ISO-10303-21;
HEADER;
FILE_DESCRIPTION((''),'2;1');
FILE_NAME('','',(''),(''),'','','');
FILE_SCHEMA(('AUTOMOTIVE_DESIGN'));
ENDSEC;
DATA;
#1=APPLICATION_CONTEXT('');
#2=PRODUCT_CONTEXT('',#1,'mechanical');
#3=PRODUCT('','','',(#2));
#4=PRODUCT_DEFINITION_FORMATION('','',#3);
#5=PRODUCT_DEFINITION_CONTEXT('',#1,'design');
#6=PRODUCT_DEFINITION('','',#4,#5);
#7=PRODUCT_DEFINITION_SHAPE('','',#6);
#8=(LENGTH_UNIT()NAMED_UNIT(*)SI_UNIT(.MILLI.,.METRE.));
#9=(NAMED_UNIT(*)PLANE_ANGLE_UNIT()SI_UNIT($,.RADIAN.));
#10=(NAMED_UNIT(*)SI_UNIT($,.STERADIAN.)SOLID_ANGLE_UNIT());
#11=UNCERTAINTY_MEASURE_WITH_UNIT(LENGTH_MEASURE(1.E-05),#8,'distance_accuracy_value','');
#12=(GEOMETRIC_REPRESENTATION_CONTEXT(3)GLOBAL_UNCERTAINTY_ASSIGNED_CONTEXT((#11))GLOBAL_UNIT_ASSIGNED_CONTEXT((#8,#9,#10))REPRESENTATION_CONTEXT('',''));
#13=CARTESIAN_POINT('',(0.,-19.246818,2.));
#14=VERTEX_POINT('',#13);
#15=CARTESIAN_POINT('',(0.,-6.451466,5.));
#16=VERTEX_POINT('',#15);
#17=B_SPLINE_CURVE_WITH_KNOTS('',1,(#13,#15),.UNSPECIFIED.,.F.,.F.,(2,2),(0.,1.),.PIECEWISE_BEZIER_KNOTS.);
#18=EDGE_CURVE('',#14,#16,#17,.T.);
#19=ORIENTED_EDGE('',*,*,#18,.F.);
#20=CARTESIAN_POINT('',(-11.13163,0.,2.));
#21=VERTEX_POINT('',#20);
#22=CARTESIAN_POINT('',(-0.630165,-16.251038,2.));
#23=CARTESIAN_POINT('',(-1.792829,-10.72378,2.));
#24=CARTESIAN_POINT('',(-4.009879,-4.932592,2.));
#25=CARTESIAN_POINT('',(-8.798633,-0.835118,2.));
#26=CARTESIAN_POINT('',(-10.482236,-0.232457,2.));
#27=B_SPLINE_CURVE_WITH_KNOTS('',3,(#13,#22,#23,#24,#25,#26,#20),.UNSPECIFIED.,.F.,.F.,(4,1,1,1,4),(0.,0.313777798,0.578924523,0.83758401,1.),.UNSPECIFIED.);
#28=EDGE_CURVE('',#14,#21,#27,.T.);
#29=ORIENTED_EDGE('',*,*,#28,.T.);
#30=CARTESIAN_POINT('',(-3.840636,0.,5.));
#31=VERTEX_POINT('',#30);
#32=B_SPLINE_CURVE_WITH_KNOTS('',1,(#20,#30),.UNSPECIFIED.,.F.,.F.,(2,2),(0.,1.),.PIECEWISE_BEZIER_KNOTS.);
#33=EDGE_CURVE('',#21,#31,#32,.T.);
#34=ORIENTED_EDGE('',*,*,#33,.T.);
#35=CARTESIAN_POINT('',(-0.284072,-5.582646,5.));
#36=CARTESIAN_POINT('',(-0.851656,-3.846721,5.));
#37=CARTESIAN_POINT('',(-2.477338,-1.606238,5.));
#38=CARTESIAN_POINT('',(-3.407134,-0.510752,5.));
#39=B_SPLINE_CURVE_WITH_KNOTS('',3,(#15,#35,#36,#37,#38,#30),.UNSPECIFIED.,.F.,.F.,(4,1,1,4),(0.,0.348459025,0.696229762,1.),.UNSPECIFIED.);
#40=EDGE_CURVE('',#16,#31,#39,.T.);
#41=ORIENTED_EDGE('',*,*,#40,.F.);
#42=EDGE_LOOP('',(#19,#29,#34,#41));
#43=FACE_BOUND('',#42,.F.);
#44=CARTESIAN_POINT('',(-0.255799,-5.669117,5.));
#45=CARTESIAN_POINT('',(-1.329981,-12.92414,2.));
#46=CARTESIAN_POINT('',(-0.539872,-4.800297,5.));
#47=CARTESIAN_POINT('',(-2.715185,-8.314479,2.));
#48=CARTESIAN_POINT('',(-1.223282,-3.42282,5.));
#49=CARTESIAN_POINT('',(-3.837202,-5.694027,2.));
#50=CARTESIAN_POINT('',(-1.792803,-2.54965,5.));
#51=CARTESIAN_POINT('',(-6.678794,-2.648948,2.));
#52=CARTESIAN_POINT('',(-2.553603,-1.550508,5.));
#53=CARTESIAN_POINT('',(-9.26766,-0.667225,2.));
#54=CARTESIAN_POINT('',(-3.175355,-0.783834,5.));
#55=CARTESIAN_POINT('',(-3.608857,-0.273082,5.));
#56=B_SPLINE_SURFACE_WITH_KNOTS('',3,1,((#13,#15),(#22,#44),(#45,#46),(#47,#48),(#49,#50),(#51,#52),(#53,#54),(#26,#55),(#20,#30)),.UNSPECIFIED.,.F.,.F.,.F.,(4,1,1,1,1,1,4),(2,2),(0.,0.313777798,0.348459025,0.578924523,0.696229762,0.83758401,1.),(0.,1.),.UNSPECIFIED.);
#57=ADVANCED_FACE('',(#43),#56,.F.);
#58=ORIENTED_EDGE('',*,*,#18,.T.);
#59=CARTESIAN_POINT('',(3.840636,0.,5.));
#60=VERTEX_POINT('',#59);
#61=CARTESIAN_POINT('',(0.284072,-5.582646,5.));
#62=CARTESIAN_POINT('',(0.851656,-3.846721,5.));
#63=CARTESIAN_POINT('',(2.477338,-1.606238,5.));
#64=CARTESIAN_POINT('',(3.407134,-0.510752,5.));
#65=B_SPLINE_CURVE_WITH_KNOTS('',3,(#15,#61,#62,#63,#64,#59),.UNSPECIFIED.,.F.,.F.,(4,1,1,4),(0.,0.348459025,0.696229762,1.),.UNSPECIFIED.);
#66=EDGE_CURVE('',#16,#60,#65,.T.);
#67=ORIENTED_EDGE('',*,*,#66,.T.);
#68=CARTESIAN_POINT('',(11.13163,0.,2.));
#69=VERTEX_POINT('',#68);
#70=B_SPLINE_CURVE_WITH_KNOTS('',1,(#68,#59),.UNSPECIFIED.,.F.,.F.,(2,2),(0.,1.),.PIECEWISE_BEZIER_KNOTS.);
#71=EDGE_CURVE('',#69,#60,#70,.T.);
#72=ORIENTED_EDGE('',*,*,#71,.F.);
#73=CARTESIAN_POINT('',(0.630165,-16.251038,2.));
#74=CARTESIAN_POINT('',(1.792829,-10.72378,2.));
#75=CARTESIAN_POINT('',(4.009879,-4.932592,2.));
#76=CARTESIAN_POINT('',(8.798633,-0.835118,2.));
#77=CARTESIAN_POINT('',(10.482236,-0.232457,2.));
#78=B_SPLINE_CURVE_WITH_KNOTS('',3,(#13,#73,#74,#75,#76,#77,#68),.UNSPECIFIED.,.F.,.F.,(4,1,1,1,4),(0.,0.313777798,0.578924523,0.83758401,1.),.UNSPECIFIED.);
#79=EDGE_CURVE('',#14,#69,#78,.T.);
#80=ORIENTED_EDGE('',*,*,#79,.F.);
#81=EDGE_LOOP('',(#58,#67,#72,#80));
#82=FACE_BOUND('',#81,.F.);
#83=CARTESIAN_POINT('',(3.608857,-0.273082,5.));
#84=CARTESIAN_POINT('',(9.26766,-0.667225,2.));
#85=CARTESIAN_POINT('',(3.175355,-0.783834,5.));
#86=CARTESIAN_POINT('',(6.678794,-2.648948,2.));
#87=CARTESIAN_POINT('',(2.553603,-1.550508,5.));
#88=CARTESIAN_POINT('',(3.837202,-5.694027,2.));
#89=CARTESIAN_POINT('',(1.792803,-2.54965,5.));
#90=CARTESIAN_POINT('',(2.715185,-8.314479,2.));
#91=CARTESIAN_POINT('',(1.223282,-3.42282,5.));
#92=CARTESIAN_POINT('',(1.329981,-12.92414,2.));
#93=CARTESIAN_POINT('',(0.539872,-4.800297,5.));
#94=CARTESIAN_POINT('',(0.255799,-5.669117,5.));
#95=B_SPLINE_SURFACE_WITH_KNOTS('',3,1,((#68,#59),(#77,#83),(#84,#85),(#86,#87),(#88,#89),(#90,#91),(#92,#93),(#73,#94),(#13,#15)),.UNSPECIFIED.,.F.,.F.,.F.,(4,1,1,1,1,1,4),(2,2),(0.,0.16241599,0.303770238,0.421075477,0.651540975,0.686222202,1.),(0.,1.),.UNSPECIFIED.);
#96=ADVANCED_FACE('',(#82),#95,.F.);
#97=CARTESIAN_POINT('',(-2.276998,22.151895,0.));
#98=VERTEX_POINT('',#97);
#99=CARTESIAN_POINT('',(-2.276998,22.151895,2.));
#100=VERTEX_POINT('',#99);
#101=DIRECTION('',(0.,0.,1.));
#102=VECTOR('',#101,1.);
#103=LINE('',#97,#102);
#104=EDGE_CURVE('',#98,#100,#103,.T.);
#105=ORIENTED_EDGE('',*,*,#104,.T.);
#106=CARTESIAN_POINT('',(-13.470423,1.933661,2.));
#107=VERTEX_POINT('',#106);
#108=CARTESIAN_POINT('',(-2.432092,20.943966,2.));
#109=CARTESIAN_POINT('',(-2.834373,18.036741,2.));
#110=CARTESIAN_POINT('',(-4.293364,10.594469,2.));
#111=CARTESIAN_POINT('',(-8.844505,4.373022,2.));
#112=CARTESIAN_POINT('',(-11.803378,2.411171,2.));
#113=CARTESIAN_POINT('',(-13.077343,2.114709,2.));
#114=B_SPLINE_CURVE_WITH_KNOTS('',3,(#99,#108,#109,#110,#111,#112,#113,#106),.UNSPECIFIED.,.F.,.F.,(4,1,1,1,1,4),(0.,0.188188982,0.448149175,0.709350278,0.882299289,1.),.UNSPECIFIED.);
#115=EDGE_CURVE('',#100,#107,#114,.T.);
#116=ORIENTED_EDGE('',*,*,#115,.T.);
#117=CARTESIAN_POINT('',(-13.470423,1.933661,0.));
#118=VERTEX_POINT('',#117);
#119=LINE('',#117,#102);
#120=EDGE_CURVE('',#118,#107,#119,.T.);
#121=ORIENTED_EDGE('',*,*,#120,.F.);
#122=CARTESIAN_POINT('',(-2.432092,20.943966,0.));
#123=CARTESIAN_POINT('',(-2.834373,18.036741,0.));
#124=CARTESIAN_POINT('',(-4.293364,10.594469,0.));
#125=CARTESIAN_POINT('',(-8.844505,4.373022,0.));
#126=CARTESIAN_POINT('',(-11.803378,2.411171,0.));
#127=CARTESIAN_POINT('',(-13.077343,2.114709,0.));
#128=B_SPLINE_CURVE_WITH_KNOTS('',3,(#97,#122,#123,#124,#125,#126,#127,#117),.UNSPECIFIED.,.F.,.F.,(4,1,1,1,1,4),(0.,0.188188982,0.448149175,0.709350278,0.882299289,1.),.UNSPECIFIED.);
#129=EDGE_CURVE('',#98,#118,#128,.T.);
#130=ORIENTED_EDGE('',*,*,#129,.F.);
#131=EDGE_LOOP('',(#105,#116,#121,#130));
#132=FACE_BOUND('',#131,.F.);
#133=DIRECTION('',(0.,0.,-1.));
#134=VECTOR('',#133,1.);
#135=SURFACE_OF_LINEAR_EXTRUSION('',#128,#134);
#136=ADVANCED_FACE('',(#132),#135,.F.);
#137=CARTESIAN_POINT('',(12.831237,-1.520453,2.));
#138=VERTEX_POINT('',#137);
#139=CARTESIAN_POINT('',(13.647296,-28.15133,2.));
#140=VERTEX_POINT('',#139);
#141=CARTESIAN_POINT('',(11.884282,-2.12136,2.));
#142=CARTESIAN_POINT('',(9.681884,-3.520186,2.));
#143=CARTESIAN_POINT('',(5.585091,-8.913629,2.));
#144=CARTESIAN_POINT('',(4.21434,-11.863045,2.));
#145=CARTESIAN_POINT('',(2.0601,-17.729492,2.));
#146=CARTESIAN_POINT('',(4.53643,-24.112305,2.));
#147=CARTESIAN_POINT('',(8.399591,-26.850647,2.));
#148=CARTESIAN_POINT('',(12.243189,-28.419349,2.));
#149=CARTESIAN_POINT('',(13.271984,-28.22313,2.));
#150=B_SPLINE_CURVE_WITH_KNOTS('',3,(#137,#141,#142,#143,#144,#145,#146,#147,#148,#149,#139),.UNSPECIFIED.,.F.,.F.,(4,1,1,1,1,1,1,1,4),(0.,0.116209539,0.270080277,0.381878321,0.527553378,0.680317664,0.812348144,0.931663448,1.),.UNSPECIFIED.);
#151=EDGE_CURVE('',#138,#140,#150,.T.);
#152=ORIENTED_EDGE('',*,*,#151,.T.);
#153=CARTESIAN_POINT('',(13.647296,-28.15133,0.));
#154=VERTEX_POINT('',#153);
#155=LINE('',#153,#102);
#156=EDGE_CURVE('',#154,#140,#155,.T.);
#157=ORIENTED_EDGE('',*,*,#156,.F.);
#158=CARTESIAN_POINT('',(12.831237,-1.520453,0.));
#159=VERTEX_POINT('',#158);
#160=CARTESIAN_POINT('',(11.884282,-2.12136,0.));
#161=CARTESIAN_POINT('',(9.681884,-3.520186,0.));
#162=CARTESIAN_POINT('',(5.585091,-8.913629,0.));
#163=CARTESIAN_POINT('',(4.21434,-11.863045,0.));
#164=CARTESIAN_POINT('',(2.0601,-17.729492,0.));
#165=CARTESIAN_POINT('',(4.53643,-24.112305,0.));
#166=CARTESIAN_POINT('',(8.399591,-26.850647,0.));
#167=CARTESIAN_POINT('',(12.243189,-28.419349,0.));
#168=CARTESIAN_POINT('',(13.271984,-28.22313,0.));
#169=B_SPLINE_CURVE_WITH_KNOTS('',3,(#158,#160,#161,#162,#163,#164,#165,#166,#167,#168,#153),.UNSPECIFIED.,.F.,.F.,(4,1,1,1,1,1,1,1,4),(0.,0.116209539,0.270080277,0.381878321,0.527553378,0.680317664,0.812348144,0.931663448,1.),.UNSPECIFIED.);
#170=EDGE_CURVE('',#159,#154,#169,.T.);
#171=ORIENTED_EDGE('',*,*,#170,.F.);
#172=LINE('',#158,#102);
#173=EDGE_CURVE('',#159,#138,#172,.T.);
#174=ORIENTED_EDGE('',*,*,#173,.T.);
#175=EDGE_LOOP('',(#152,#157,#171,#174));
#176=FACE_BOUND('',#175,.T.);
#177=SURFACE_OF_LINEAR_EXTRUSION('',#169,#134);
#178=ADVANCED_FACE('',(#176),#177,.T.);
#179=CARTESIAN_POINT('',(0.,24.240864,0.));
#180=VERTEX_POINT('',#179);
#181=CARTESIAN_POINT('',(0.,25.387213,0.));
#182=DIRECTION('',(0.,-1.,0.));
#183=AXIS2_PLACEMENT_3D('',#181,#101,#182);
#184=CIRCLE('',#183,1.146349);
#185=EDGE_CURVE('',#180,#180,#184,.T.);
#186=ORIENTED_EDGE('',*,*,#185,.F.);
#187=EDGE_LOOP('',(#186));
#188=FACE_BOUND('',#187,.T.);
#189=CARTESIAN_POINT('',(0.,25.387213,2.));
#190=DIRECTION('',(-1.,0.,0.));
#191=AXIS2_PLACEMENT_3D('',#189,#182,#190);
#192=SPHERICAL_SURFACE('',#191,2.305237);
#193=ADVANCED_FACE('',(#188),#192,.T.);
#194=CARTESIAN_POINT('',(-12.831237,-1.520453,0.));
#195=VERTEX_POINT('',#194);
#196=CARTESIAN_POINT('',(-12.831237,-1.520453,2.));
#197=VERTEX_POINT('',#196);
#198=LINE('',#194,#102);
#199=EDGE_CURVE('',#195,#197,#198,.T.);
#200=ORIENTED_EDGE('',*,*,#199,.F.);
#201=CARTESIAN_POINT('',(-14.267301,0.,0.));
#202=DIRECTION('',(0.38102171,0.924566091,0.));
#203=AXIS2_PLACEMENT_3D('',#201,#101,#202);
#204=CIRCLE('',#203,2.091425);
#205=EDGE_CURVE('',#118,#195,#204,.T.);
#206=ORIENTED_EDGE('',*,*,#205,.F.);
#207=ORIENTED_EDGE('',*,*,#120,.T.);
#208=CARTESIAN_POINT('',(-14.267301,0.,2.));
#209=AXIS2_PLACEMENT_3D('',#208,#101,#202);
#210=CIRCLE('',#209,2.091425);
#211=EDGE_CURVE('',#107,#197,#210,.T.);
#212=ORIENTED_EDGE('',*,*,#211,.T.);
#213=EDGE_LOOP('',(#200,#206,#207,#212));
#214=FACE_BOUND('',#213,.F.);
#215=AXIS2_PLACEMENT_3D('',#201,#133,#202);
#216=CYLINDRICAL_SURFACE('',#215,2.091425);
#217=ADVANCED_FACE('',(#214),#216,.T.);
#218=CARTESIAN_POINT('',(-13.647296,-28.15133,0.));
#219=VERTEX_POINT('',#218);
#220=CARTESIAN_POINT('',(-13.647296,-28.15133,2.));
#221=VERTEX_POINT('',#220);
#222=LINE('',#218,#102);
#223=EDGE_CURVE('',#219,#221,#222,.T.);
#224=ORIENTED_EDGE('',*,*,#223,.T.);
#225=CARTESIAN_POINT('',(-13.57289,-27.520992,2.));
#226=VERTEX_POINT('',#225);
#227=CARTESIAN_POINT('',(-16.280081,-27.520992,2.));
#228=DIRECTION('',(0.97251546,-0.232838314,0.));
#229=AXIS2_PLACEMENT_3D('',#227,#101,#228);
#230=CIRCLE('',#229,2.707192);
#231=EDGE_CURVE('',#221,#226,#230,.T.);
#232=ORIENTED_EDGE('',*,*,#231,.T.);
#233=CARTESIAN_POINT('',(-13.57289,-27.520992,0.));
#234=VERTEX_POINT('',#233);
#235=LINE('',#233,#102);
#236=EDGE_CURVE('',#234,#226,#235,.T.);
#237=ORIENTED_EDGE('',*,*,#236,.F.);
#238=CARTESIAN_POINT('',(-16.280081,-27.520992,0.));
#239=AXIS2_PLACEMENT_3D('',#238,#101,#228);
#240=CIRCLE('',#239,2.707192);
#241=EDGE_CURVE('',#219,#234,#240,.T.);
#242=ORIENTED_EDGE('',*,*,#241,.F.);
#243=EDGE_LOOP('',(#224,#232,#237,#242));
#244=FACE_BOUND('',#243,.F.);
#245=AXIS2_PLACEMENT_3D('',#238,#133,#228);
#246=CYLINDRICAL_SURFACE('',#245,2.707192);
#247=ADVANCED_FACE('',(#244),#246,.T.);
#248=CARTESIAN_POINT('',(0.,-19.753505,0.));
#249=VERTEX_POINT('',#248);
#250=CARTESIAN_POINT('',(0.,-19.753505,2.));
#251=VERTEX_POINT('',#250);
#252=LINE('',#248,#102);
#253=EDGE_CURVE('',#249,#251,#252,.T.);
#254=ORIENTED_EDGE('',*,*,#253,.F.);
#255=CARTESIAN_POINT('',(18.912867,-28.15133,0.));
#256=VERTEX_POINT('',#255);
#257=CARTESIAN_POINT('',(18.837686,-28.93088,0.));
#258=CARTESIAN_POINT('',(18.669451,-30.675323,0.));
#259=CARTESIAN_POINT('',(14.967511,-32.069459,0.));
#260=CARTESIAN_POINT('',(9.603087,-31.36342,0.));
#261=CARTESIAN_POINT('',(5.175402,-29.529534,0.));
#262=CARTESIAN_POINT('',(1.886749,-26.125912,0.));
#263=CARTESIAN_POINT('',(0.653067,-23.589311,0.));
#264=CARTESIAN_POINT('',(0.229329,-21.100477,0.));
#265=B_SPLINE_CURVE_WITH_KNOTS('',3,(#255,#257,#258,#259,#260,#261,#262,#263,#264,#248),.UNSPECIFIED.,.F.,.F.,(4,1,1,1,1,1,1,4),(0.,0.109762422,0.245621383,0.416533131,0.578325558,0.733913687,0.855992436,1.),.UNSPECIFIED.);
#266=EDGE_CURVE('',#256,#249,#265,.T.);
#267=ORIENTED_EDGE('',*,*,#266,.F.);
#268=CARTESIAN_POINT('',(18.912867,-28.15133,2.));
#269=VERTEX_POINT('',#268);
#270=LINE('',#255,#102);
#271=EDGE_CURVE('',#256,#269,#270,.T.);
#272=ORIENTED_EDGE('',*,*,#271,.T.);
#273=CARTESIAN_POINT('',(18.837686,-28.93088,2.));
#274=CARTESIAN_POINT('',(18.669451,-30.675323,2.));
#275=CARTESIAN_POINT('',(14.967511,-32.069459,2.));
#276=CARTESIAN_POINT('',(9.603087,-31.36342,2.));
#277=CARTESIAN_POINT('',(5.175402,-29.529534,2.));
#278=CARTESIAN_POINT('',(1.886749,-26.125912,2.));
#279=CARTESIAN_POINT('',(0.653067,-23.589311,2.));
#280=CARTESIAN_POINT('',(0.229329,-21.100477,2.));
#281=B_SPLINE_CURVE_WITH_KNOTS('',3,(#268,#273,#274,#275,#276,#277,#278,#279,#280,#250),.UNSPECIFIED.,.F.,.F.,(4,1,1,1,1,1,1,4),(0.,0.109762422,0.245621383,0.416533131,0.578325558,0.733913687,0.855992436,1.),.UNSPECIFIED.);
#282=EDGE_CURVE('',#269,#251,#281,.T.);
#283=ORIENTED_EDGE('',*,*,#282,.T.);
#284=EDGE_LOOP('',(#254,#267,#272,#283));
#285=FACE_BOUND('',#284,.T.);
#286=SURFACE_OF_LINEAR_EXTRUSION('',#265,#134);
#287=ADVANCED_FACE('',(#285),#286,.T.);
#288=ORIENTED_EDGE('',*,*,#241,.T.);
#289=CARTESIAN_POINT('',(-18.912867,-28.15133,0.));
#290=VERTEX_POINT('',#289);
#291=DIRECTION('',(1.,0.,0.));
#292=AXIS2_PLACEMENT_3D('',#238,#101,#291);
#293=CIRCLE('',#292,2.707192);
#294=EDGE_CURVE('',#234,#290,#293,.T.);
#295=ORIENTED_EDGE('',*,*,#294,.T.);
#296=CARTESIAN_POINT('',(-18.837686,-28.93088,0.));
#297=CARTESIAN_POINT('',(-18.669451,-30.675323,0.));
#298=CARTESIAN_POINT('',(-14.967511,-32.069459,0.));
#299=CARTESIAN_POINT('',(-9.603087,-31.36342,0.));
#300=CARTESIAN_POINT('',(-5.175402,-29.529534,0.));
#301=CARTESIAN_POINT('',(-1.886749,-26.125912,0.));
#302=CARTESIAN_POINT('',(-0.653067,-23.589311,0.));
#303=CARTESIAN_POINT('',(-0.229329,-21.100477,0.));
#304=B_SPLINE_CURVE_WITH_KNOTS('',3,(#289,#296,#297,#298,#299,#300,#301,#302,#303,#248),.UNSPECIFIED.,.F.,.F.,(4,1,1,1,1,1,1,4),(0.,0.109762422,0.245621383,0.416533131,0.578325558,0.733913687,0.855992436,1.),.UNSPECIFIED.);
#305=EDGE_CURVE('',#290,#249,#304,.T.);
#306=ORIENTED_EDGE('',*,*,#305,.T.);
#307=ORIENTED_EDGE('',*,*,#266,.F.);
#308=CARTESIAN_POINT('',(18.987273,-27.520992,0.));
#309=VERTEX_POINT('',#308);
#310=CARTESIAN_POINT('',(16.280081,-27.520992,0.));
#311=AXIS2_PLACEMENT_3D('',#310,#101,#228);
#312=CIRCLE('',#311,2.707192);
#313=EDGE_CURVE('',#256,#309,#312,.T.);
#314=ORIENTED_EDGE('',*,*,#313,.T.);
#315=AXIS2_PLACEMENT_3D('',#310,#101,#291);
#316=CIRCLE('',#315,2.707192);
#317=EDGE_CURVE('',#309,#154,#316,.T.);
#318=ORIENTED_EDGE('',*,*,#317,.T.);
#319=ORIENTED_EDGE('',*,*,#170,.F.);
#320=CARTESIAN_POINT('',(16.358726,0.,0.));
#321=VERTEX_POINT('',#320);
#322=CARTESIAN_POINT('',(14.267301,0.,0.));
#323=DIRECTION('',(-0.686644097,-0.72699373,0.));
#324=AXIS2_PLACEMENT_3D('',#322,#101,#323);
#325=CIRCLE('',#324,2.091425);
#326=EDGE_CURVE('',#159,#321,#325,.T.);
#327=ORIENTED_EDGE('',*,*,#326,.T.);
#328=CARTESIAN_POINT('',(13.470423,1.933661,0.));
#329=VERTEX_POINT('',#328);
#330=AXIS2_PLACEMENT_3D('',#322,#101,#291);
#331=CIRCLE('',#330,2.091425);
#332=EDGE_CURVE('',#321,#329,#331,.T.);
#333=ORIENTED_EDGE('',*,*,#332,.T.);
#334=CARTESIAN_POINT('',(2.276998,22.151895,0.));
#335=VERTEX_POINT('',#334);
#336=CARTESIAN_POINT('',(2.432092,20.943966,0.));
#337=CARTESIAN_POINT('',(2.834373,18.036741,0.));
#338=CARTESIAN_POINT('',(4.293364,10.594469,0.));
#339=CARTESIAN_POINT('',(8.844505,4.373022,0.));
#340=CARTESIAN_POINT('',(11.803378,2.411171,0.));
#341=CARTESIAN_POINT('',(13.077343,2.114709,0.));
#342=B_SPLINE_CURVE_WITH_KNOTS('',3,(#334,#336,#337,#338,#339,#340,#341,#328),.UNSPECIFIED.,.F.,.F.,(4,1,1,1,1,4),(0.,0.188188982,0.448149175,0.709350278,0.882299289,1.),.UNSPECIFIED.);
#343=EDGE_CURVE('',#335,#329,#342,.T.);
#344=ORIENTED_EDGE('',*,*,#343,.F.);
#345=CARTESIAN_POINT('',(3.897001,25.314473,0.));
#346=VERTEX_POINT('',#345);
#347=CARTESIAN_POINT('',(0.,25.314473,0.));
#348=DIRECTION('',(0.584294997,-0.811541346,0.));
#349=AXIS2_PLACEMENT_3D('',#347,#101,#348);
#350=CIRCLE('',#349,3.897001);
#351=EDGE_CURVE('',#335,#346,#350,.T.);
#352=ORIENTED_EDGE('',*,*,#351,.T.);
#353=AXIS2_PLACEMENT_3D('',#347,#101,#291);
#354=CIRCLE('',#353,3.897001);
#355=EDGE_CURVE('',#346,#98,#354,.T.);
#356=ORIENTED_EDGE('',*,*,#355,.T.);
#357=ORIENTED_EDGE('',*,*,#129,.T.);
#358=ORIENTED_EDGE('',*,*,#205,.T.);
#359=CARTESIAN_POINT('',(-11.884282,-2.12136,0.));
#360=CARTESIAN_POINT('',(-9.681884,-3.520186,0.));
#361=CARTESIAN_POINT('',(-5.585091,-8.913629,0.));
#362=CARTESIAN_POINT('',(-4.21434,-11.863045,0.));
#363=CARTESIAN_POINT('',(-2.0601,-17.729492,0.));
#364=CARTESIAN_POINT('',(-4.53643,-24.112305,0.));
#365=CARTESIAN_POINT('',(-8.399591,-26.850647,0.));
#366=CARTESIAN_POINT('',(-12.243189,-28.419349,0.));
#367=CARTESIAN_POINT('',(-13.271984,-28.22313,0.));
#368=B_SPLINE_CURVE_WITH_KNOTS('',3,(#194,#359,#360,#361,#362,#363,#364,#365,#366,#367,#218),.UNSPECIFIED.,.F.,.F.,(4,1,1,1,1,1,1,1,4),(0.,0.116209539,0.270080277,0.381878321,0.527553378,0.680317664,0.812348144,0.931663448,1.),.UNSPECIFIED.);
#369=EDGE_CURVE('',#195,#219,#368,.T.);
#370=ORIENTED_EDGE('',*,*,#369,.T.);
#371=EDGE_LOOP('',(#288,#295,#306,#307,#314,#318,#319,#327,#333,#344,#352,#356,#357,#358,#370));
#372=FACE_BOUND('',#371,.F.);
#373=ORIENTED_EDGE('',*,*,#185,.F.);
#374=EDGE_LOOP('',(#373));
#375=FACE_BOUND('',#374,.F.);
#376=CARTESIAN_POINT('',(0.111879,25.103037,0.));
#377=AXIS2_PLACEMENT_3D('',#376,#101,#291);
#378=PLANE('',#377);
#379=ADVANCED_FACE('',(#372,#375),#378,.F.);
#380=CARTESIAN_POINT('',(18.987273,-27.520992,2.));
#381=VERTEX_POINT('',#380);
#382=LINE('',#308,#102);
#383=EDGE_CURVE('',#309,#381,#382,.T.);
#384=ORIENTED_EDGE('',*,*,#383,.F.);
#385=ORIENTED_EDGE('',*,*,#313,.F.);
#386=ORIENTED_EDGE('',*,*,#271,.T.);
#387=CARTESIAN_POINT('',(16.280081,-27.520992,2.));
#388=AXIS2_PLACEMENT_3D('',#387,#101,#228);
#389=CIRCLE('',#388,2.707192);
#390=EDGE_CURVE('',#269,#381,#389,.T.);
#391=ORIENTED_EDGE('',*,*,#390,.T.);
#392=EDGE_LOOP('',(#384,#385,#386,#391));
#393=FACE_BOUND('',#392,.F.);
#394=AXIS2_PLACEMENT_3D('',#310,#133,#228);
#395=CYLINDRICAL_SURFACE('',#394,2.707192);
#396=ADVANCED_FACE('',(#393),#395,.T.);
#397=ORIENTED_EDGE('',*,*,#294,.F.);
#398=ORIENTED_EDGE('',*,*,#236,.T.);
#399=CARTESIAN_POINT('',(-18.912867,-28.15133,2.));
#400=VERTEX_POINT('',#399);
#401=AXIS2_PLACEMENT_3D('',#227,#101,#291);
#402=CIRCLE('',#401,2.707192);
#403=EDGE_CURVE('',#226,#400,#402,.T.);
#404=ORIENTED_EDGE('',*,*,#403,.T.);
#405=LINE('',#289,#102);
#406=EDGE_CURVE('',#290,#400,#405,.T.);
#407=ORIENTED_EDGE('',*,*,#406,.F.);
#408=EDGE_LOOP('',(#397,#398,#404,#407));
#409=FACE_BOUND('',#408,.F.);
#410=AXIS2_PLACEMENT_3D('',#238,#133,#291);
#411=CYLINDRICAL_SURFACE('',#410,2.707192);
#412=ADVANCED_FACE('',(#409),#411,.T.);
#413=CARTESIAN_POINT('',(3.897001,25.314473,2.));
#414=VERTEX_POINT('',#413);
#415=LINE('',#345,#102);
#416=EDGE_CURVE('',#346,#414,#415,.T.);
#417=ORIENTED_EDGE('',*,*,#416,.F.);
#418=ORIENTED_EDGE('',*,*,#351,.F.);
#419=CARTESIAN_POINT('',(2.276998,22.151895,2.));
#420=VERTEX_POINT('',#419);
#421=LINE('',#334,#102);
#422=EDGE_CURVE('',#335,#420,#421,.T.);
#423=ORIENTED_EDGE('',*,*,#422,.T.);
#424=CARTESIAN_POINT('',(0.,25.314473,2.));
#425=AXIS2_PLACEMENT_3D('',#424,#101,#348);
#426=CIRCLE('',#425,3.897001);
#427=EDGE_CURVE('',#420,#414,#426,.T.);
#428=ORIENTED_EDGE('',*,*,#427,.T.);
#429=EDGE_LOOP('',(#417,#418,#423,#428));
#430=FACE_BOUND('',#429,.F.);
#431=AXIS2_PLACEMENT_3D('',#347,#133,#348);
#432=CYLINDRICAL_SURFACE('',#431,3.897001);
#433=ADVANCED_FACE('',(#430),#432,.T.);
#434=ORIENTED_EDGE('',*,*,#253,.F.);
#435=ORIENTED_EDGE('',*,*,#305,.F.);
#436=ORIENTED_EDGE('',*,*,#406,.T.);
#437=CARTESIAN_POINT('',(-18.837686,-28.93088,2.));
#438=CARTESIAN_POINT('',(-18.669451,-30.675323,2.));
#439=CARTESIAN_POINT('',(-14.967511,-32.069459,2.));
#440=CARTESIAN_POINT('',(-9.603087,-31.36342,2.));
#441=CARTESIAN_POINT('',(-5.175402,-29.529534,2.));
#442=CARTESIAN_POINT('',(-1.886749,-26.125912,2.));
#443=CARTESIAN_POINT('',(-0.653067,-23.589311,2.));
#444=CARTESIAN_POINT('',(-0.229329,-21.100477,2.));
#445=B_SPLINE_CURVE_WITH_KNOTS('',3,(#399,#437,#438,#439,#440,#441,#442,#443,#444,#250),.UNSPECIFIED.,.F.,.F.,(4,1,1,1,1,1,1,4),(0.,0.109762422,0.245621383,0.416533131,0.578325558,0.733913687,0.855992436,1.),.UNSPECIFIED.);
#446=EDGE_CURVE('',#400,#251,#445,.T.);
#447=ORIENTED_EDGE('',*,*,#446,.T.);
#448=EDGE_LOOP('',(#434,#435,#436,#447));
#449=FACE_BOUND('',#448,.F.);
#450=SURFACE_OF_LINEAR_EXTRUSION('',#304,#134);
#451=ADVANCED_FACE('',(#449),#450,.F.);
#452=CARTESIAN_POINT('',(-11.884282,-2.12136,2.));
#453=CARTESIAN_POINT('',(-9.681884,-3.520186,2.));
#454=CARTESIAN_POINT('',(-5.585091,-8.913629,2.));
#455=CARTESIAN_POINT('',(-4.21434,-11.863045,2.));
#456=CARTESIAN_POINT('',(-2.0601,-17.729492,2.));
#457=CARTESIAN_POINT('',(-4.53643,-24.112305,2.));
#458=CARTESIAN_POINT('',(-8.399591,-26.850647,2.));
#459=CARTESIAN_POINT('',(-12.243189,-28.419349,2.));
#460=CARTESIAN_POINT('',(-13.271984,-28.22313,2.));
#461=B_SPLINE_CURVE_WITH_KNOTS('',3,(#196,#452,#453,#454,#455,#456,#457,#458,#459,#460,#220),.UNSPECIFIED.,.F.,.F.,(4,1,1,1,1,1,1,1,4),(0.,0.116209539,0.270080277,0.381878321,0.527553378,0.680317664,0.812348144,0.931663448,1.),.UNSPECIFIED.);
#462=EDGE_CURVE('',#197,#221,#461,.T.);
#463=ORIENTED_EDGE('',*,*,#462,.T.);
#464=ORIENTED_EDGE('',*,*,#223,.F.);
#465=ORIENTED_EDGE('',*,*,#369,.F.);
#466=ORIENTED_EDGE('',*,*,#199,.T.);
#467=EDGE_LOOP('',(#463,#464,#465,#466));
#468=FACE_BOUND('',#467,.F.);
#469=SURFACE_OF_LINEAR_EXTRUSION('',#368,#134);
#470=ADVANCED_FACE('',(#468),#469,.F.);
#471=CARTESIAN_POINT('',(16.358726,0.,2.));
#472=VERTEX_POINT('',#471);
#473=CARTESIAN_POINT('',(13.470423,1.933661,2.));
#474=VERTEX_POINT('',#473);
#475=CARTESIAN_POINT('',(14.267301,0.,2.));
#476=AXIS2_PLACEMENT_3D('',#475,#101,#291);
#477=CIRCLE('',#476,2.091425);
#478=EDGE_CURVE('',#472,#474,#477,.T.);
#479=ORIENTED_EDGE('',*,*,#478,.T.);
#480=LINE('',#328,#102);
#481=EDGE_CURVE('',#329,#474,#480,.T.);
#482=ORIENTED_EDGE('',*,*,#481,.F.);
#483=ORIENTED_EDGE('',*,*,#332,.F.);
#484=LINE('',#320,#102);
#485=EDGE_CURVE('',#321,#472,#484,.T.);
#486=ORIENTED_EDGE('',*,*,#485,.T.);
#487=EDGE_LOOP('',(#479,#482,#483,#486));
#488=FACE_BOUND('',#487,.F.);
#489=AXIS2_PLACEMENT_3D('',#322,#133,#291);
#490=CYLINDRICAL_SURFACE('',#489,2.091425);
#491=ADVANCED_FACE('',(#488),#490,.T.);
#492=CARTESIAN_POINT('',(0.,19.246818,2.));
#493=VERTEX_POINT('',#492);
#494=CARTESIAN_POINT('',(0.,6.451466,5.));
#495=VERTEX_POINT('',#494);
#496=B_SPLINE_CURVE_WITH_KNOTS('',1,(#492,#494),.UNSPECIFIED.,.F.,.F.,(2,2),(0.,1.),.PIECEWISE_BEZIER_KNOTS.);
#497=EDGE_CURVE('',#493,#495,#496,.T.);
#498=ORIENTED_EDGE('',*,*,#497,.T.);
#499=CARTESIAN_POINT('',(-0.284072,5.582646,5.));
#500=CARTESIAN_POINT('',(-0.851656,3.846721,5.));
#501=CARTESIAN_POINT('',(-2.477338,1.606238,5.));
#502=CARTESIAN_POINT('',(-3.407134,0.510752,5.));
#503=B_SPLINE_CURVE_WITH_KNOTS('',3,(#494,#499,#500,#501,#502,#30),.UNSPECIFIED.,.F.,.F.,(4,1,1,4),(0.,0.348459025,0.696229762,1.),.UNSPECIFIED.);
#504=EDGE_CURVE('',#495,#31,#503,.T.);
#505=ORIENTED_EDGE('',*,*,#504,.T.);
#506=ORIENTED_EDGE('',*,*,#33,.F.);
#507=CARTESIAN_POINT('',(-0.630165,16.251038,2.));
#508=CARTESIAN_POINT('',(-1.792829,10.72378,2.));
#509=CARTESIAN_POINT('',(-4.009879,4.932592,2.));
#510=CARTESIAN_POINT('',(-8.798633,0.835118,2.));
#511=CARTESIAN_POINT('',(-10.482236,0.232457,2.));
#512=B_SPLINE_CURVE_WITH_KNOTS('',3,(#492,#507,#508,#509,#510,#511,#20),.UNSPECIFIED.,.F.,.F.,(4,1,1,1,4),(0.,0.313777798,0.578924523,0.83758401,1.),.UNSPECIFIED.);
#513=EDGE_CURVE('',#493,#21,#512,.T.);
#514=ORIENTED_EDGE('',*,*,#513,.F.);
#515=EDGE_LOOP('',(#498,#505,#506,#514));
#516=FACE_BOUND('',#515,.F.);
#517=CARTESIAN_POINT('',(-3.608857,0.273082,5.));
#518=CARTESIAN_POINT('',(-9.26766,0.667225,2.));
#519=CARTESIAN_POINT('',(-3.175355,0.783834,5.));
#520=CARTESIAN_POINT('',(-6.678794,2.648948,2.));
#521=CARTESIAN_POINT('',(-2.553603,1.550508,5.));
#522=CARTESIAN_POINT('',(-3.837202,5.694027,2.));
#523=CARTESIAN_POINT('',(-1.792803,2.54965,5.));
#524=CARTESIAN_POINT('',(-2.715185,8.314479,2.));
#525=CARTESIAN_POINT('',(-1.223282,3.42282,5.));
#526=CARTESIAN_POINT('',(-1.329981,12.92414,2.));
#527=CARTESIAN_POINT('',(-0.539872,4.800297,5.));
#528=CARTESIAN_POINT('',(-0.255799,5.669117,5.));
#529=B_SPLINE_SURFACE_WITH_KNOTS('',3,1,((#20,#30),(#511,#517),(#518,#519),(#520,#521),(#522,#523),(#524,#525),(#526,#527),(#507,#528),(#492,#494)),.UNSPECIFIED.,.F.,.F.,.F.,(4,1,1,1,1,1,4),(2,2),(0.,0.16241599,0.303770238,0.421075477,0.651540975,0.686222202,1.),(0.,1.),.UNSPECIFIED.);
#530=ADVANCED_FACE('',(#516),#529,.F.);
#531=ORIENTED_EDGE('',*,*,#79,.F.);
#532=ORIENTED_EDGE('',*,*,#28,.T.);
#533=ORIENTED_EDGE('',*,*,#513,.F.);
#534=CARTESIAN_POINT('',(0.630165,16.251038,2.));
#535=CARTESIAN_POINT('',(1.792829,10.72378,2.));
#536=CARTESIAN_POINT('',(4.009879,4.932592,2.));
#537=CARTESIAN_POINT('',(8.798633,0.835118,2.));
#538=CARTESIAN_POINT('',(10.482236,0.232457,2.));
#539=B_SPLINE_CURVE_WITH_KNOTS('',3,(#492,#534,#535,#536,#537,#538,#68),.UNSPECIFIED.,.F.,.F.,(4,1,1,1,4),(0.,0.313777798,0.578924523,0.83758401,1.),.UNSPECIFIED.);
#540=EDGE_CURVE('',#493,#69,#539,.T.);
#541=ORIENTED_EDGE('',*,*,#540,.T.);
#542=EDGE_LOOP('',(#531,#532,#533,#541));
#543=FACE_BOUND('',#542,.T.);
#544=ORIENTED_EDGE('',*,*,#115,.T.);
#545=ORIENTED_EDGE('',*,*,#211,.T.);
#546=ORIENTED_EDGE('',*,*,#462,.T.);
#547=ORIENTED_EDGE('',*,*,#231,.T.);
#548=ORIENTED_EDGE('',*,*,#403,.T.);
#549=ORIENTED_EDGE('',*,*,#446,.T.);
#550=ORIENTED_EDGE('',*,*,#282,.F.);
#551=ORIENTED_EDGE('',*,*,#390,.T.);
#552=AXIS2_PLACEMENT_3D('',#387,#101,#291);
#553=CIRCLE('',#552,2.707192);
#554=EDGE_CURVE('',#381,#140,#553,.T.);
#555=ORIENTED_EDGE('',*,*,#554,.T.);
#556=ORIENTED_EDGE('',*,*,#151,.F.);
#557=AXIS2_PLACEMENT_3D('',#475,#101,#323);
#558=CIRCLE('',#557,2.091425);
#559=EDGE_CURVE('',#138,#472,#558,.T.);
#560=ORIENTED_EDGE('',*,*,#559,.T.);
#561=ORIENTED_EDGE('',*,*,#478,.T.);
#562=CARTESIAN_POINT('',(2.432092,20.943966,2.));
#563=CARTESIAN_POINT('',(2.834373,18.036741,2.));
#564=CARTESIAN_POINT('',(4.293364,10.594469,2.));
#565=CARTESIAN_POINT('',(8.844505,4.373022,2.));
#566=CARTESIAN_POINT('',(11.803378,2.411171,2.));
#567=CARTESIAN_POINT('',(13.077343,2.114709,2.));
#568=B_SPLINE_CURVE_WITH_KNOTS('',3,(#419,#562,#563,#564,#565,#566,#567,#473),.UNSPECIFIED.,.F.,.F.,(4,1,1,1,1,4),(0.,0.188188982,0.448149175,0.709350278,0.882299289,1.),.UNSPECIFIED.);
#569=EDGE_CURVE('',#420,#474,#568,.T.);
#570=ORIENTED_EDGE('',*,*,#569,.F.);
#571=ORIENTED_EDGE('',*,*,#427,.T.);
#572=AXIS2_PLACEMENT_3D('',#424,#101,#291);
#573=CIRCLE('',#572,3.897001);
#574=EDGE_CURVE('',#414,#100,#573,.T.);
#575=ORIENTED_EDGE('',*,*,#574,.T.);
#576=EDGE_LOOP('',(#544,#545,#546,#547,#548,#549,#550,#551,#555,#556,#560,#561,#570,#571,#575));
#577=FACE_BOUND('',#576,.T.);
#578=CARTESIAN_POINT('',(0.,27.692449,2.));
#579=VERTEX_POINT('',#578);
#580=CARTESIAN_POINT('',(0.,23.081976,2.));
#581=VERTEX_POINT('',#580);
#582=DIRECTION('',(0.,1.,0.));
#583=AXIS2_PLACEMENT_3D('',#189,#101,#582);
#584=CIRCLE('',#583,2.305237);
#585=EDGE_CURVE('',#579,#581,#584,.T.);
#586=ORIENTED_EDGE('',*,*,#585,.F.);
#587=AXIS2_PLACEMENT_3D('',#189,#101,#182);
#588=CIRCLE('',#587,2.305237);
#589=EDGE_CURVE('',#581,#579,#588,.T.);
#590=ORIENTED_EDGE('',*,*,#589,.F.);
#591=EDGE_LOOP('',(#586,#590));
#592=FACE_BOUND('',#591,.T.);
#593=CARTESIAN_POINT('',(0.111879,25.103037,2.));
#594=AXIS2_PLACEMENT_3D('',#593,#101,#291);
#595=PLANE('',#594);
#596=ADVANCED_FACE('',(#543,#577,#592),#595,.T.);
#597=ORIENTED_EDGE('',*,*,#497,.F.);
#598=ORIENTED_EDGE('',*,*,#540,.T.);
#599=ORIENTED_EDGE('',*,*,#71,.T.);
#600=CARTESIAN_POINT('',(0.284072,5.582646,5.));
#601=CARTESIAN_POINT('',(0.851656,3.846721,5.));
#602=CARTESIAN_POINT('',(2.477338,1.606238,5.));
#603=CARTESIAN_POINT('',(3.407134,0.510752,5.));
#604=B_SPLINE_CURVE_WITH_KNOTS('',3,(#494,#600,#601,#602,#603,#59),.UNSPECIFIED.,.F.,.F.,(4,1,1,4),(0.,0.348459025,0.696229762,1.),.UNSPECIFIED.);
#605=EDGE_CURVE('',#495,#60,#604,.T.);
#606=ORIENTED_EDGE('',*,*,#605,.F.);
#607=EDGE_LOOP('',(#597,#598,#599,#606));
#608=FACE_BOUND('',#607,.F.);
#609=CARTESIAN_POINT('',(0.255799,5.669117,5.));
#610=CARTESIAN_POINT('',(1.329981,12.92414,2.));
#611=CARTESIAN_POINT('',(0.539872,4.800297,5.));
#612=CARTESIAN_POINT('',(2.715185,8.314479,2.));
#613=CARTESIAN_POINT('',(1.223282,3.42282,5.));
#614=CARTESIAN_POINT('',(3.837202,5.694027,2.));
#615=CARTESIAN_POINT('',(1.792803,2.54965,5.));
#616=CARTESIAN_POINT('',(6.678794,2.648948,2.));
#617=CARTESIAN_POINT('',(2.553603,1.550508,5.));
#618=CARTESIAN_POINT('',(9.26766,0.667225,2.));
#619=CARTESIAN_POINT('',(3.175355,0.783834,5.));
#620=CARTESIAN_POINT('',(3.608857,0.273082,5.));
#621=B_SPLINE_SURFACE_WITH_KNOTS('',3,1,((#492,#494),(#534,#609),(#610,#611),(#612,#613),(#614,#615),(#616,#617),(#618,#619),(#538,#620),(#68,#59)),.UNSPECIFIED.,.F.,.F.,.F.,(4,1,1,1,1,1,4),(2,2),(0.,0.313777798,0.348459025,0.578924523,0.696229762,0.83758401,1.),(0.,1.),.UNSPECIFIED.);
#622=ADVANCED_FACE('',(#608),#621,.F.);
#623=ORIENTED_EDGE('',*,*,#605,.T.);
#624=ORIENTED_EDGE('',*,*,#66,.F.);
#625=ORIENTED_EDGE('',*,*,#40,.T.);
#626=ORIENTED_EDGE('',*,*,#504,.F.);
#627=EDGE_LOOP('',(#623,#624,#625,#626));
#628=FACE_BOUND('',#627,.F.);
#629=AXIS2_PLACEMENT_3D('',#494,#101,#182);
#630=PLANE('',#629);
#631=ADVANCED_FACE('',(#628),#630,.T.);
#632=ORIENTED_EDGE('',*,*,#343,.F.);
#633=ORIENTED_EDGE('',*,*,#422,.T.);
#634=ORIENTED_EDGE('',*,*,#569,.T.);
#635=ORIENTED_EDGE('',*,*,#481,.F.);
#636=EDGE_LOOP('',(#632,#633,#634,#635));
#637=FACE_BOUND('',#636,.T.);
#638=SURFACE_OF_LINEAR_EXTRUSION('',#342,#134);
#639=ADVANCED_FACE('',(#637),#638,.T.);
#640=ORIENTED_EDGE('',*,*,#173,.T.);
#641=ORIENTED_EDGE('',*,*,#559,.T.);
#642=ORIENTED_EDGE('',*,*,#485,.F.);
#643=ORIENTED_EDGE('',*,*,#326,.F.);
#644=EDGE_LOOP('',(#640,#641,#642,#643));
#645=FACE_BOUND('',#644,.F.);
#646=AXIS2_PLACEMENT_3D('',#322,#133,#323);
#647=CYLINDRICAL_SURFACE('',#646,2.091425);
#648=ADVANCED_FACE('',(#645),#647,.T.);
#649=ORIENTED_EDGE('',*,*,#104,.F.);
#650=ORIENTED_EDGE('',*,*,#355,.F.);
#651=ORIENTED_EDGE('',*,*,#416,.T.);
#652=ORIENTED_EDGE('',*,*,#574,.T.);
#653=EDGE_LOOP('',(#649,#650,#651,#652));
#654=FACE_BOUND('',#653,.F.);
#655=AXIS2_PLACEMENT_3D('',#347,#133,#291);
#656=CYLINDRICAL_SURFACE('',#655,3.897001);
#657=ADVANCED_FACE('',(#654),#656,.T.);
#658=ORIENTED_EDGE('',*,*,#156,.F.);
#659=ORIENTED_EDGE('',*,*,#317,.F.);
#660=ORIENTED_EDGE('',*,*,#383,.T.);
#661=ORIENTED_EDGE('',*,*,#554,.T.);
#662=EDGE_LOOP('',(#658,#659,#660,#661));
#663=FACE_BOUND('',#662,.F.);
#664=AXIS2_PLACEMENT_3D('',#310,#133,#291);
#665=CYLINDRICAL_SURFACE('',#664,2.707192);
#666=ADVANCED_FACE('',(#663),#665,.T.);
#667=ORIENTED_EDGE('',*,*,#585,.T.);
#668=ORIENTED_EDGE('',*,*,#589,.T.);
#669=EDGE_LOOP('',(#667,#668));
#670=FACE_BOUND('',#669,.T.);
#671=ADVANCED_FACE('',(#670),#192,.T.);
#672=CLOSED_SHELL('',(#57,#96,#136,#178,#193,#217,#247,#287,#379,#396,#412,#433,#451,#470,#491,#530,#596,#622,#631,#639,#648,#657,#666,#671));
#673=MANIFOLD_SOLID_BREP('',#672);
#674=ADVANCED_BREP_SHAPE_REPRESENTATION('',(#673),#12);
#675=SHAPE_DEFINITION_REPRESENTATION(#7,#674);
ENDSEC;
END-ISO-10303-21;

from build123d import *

# Parameters (mm, degrees)
F1_DEPTH = 2


with BuildPart() as f1:
    # F0 (on Top) → F1 (new body)
    with BuildSketch(Plane.XY):
        with BuildLine():
            ThreePointArc((2.276998472, 22.1518947859), (3.4684353098, 23.5377967667), (3.8970014846, 25.3144726157))
            ThreePointArc((3.8970014846, 25.3144726157), (-1.776675849, 28.7829079255), (-2.276998472, 22.1518947859))
            ThreePointArc((-2.276998472, 22.1518947859), (0, 21.4174711311), (2.276998472, 22.1518947859))
        make_face()
        with BuildLine():
            ThreePointArc((2.276998472, 22.1518947859), (0, 21.4174711311), (-2.276998472, 22.1518947859))
            add(Edge.make_bspline(
                [(-2.276998472, 22.1518947859), (-2.43209236, 20.9439660702), (-2.8343734971, 18.0367414787), (-4.2933644234, 10.5944689547), (-8.8445045466, 4.3730220087), (-11.8033781804, 2.4111709095), (-13.0773430388, 2.1147085966), (-13.4704228381, 1.9336606815)],
                knots=[0, 0, 0, 0, 0.1881889821, 0.4481491748, 0.7093502782, 0.8822992894, 1, 1, 1, 1], degree=3))
            ThreePointArc((-13.4704228381, 1.9336606815), (-12.5293900739, 1.1634963246), (-12.1758761383, 0))
            ThreePointArc((-12.1758761383, 0), (-12.3466918638, -0.827839696), (-12.831236523, -1.520452898))
            add(Edge.make_bspline(
                [(-12.831236523, -1.520452898), (-11.8842823807, -2.1213598077), (-9.681883743, -3.5201856027), (-5.5850911002, -8.9136286048), (-4.2143400839, -11.8630451312), (-2.0601001418, -17.7294924846), (-4.5364296122, -24.1123047819), (-8.3995913538, -26.8506466614), (-12.2431889954, -28.4193492404), (-13.2719842293, -28.2231302019), (-13.6472955259, -28.1513297683)],
                knots=[0, 0, 0, 0, 0.116209539, 0.2700802769, 0.3818783209, 0.5275533776, 0.680317664, 0.8123481439, 0.9316634476, 1, 1, 1, 1], degree=3))
            ThreePointArc((-13.6472955259, -28.1513297683), (-16.2800811231, -30.2281833728), (-18.9128667203, -28.1513297683))
            add(Edge.make_bspline(
                [(-18.9128667203, -28.1513297683), (-18.8376863203, -28.9308803678), (-18.6694510212, -30.675323445), (-14.9675114924, -32.0694588166), (-9.6030872532, -31.3634199504), (-5.1754016498, -29.5295339957), (-1.8867493119, -26.1259118959), (-0.6530666103, -23.5893108184), (-0.2293292758, -21.1004769068), (0, -19.7535045445)],
                knots=[0, 0, 0, 0, 0.1097624217, 0.2456213834, 0.4165331309, 0.578325558, 0.7339136873, 0.8559924358, 1, 1, 1, 1], degree=3))
            add(Edge.make_bspline(
                [(18.9128667203, -28.1513297683), (18.8376863203, -28.9308803678), (18.6694510212, -30.675323445), (14.9675114924, -32.0694588166), (9.6030872532, -31.3634199504), (5.1754016498, -29.5295339957), (1.8867493119, -26.1259118959), (0.6530666103, -23.5893108184), (0.2293292758, -21.1004769068), (0, -19.7535045445)],
                knots=[0, 0, 0, 0, 0.1097624217, 0.2456213834, 0.4165331309, 0.578325558, 0.7339136873, 0.8559924358, 1, 1, 1, 1], degree=3))
            ThreePointArc((18.9128667203, -28.1513297683), (16.2800811231, -30.2281833728), (13.6472955259, -28.1513297683))
            add(Edge.make_bspline(
                [(12.831236523, -1.520452898), (11.8842823807, -2.1213598077), (9.681883743, -3.5201856027), (5.5850911002, -8.9136286048), (4.2143400839, -11.8630451312), (2.0601001418, -17.7294924846), (4.5364296122, -24.1123047819), (8.3995913538, -26.8506466614), (12.2431889954, -28.4193492404), (13.2719842293, -28.2231302019), (13.6472955259, -28.1513297683)],
                knots=[0, 0, 0, 0, 0.116209539, 0.2700802769, 0.3818783209, 0.5275533776, 0.680317664, 0.8123481439, 0.9316634476, 1, 1, 1, 1], degree=3))
            ThreePointArc((12.831236523, -1.520452898), (12.2107910898, 0.3805587398), (13.4704228381, 1.9336606815))
            add(Edge.make_bspline(
                [(2.276998472, 22.1518947859), (2.43209236, 20.9439660702), (2.8343734971, 18.0367414787), (4.2933644234, 10.5944689547), (8.8445045466, 4.3730220087), (11.8033781804, 2.4111709095), (13.0773430388, 2.1147085966), (13.4704228381, 1.9336606815)],
                knots=[0, 0, 0, 0, 0.1881889821, 0.4481491748, 0.7093502782, 0.8822992894, 1, 1, 1, 1], degree=3))
        make_face()
        with BuildLine():
            ThreePointArc((-12.1758761383, 0), (-12.5293900739, 1.1634963246), (-13.4704228381, 1.9336606815))
            ThreePointArc((-13.4704228381, 1.9336606815), (-16.3238112841, -0.3805587398), (-12.831236523, -1.520452898))
            ThreePointArc((-12.831236523, -1.520452898), (-12.3466918638, -0.827839696), (-12.1758761383, 0))
        make_face()
        with BuildLine():
            ThreePointArc((16.3587262356, 0), (15.4307975115, 1.737911113), (13.4704228381, 1.9336606815))
            ThreePointArc((13.4704228381, 1.9336606815), (12.2107910898, 0.3805587398), (12.831236523, -1.520452898))
            ThreePointArc((12.831236523, -1.520452898), (15.0951408829, -1.9206093231), (16.3587262356, 0))
        make_face()
        with BuildLine():
            ThreePointArc((-18.9128667203, -28.1513297683), (-16.2800811231, -30.2281833728), (-13.6472955259, -28.1513297683))
            ThreePointArc((-13.6472955259, -28.1513297683), (-13.5915554401, -27.8383489621), (-13.5728896121, -27.5209918618))
            ThreePointArc((-13.5728896121, -27.5209918618), (-16.5974382234, -24.8324661788), (-18.9128667203, -28.1513297683))
        make_face()
        with BuildLine():
            ThreePointArc((18.9872726341, -27.5209918618), (15.9627240228, -24.8324661788), (13.6472955259, -28.1513297683))
            ThreePointArc((13.6472955259, -28.1513297683), (16.2800811231, -30.2281833728), (18.9128667203, -28.1513297683))
            ThreePointArc((18.9128667203, -28.1513297683), (18.9686068061, -27.8383489621), (18.9872726341, -27.5209918618))
        make_face()
    extrude(amount=F1_DEPTH)

    # F2 (on face) → F5 section 0
    with BuildSketch(Plane.XY.offset(2)):
        with BuildLine():
            add(Edge.make_bspline(
                [(0, 19.2468184978), (0.6301650981, 16.2510379584), (1.7928287138, 10.723780032), (4.0098790345, 4.9325918727), (8.7986333903, 0.8351177225), (10.4822360359, 0.2324566501), (11.1316302791, 0)],
                knots=[0, 0, 0, 0, 0.3137777977, 0.578924523, 0.8375840098, 1, 1, 1, 1], degree=3))
            add(Edge.make_bspline(
                [(0, 19.2468184978), (-0.6301650981, 16.2510379584), (-1.7928287138, 10.723780032), (-4.0098790345, 4.9325918727), (-8.7986333903, 0.8351177225), (-10.4822360359, 0.2324566501), (-11.1316302791, 0)],
                knots=[0, 0, 0, 0, 0.3137777977, 0.578924523, 0.8375840098, 1, 1, 1, 1], degree=3))
            add(Edge.make_bspline(
                [(0, -19.2468184978), (-0.6301650981, -16.2510379584), (-1.7928287138, -10.723780032), (-4.0098790345, -4.9325918727), (-8.7986333903, -0.8351177225), (-10.4822360359, -0.2324566501), (-11.1316302791, 0)],
                knots=[0, 0, 0, 0, 0.3137777977, 0.578924523, 0.8375840098, 1, 1, 1, 1], degree=3))
            add(Edge.make_bspline(
                [(0, -19.2468184978), (0.6301650981, -16.2510379584), (1.7928287138, -10.723780032), (4.0098790345, -4.9325918727), (8.7986333903, -0.8351177225), (10.4822360359, -0.2324566501), (11.1316302791, 0)],
                knots=[0, 0, 0, 0, 0.3137777977, 0.578924523, 0.8375840098, 1, 1, 1, 1], degree=3))
        make_face()
    # F4 (on offset) → F5 section 1
    with BuildSketch(Plane.XY.offset(5)):
        with BuildLine():
            add(Edge.make_bspline(
                [(0, 6.4514661208), (0.2840723178, 5.5826456273), (0.851655844, 3.8467207648), (2.4773384631, 1.6062376793), (3.4071339479, 0.5107520935), (3.8406357635, 0)],
                knots=[0, 0, 0, 0, 0.3484590253, 0.6962297623, 1, 1, 1, 1], degree=3))
            add(Edge.make_bspline(
                [(0, 6.4514661208), (-0.2840723178, 5.5826456273), (-0.851655844, 3.8467207648), (-2.4773384631, 1.6062376793), (-3.4071339479, 0.5107520935), (-3.8406357635, 0)],
                knots=[0, 0, 0, 0, 0.3484590253, 0.6962297623, 1, 1, 1, 1], degree=3))
            add(Edge.make_bspline(
                [(0, -6.4514661208), (-0.2840723178, -5.5826456273), (-0.851655844, -3.8467207648), (-2.4773384631, -1.6062376793), (-3.4071339479, -0.5107520935), (-3.8406357635, 0)],
                knots=[0, 0, 0, 0, 0.3484590253, 0.6962297623, 1, 1, 1, 1], degree=3))
            add(Edge.make_bspline(
                [(0, -6.4514661208), (0.2840723178, -5.5826456273), (0.851655844, -3.8467207648), (2.4773384631, -1.6062376793), (3.4071339479, -0.5107520935), (3.8406357635, 0)],
                knots=[0, 0, 0, 0, 0.3484590253, 0.6962297623, 1, 1, 1, 1], degree=3))
        make_face()
    loft()

    # F6 (on face) → F7 (revolve)
    with BuildSketch(Plane.XY.offset(2)):
        with BuildLine():
            Line((0, 23.0819760401), (0, 27.6924492281))
            ThreePointArc((0, 27.6924492281), (-2.305236594, 25.3872126341), (0, 23.0819760401))
        make_face()
    revolve(axis=Axis((0, 25.3872126341, 2), (0, -1, 0)))


solid = f1.part
